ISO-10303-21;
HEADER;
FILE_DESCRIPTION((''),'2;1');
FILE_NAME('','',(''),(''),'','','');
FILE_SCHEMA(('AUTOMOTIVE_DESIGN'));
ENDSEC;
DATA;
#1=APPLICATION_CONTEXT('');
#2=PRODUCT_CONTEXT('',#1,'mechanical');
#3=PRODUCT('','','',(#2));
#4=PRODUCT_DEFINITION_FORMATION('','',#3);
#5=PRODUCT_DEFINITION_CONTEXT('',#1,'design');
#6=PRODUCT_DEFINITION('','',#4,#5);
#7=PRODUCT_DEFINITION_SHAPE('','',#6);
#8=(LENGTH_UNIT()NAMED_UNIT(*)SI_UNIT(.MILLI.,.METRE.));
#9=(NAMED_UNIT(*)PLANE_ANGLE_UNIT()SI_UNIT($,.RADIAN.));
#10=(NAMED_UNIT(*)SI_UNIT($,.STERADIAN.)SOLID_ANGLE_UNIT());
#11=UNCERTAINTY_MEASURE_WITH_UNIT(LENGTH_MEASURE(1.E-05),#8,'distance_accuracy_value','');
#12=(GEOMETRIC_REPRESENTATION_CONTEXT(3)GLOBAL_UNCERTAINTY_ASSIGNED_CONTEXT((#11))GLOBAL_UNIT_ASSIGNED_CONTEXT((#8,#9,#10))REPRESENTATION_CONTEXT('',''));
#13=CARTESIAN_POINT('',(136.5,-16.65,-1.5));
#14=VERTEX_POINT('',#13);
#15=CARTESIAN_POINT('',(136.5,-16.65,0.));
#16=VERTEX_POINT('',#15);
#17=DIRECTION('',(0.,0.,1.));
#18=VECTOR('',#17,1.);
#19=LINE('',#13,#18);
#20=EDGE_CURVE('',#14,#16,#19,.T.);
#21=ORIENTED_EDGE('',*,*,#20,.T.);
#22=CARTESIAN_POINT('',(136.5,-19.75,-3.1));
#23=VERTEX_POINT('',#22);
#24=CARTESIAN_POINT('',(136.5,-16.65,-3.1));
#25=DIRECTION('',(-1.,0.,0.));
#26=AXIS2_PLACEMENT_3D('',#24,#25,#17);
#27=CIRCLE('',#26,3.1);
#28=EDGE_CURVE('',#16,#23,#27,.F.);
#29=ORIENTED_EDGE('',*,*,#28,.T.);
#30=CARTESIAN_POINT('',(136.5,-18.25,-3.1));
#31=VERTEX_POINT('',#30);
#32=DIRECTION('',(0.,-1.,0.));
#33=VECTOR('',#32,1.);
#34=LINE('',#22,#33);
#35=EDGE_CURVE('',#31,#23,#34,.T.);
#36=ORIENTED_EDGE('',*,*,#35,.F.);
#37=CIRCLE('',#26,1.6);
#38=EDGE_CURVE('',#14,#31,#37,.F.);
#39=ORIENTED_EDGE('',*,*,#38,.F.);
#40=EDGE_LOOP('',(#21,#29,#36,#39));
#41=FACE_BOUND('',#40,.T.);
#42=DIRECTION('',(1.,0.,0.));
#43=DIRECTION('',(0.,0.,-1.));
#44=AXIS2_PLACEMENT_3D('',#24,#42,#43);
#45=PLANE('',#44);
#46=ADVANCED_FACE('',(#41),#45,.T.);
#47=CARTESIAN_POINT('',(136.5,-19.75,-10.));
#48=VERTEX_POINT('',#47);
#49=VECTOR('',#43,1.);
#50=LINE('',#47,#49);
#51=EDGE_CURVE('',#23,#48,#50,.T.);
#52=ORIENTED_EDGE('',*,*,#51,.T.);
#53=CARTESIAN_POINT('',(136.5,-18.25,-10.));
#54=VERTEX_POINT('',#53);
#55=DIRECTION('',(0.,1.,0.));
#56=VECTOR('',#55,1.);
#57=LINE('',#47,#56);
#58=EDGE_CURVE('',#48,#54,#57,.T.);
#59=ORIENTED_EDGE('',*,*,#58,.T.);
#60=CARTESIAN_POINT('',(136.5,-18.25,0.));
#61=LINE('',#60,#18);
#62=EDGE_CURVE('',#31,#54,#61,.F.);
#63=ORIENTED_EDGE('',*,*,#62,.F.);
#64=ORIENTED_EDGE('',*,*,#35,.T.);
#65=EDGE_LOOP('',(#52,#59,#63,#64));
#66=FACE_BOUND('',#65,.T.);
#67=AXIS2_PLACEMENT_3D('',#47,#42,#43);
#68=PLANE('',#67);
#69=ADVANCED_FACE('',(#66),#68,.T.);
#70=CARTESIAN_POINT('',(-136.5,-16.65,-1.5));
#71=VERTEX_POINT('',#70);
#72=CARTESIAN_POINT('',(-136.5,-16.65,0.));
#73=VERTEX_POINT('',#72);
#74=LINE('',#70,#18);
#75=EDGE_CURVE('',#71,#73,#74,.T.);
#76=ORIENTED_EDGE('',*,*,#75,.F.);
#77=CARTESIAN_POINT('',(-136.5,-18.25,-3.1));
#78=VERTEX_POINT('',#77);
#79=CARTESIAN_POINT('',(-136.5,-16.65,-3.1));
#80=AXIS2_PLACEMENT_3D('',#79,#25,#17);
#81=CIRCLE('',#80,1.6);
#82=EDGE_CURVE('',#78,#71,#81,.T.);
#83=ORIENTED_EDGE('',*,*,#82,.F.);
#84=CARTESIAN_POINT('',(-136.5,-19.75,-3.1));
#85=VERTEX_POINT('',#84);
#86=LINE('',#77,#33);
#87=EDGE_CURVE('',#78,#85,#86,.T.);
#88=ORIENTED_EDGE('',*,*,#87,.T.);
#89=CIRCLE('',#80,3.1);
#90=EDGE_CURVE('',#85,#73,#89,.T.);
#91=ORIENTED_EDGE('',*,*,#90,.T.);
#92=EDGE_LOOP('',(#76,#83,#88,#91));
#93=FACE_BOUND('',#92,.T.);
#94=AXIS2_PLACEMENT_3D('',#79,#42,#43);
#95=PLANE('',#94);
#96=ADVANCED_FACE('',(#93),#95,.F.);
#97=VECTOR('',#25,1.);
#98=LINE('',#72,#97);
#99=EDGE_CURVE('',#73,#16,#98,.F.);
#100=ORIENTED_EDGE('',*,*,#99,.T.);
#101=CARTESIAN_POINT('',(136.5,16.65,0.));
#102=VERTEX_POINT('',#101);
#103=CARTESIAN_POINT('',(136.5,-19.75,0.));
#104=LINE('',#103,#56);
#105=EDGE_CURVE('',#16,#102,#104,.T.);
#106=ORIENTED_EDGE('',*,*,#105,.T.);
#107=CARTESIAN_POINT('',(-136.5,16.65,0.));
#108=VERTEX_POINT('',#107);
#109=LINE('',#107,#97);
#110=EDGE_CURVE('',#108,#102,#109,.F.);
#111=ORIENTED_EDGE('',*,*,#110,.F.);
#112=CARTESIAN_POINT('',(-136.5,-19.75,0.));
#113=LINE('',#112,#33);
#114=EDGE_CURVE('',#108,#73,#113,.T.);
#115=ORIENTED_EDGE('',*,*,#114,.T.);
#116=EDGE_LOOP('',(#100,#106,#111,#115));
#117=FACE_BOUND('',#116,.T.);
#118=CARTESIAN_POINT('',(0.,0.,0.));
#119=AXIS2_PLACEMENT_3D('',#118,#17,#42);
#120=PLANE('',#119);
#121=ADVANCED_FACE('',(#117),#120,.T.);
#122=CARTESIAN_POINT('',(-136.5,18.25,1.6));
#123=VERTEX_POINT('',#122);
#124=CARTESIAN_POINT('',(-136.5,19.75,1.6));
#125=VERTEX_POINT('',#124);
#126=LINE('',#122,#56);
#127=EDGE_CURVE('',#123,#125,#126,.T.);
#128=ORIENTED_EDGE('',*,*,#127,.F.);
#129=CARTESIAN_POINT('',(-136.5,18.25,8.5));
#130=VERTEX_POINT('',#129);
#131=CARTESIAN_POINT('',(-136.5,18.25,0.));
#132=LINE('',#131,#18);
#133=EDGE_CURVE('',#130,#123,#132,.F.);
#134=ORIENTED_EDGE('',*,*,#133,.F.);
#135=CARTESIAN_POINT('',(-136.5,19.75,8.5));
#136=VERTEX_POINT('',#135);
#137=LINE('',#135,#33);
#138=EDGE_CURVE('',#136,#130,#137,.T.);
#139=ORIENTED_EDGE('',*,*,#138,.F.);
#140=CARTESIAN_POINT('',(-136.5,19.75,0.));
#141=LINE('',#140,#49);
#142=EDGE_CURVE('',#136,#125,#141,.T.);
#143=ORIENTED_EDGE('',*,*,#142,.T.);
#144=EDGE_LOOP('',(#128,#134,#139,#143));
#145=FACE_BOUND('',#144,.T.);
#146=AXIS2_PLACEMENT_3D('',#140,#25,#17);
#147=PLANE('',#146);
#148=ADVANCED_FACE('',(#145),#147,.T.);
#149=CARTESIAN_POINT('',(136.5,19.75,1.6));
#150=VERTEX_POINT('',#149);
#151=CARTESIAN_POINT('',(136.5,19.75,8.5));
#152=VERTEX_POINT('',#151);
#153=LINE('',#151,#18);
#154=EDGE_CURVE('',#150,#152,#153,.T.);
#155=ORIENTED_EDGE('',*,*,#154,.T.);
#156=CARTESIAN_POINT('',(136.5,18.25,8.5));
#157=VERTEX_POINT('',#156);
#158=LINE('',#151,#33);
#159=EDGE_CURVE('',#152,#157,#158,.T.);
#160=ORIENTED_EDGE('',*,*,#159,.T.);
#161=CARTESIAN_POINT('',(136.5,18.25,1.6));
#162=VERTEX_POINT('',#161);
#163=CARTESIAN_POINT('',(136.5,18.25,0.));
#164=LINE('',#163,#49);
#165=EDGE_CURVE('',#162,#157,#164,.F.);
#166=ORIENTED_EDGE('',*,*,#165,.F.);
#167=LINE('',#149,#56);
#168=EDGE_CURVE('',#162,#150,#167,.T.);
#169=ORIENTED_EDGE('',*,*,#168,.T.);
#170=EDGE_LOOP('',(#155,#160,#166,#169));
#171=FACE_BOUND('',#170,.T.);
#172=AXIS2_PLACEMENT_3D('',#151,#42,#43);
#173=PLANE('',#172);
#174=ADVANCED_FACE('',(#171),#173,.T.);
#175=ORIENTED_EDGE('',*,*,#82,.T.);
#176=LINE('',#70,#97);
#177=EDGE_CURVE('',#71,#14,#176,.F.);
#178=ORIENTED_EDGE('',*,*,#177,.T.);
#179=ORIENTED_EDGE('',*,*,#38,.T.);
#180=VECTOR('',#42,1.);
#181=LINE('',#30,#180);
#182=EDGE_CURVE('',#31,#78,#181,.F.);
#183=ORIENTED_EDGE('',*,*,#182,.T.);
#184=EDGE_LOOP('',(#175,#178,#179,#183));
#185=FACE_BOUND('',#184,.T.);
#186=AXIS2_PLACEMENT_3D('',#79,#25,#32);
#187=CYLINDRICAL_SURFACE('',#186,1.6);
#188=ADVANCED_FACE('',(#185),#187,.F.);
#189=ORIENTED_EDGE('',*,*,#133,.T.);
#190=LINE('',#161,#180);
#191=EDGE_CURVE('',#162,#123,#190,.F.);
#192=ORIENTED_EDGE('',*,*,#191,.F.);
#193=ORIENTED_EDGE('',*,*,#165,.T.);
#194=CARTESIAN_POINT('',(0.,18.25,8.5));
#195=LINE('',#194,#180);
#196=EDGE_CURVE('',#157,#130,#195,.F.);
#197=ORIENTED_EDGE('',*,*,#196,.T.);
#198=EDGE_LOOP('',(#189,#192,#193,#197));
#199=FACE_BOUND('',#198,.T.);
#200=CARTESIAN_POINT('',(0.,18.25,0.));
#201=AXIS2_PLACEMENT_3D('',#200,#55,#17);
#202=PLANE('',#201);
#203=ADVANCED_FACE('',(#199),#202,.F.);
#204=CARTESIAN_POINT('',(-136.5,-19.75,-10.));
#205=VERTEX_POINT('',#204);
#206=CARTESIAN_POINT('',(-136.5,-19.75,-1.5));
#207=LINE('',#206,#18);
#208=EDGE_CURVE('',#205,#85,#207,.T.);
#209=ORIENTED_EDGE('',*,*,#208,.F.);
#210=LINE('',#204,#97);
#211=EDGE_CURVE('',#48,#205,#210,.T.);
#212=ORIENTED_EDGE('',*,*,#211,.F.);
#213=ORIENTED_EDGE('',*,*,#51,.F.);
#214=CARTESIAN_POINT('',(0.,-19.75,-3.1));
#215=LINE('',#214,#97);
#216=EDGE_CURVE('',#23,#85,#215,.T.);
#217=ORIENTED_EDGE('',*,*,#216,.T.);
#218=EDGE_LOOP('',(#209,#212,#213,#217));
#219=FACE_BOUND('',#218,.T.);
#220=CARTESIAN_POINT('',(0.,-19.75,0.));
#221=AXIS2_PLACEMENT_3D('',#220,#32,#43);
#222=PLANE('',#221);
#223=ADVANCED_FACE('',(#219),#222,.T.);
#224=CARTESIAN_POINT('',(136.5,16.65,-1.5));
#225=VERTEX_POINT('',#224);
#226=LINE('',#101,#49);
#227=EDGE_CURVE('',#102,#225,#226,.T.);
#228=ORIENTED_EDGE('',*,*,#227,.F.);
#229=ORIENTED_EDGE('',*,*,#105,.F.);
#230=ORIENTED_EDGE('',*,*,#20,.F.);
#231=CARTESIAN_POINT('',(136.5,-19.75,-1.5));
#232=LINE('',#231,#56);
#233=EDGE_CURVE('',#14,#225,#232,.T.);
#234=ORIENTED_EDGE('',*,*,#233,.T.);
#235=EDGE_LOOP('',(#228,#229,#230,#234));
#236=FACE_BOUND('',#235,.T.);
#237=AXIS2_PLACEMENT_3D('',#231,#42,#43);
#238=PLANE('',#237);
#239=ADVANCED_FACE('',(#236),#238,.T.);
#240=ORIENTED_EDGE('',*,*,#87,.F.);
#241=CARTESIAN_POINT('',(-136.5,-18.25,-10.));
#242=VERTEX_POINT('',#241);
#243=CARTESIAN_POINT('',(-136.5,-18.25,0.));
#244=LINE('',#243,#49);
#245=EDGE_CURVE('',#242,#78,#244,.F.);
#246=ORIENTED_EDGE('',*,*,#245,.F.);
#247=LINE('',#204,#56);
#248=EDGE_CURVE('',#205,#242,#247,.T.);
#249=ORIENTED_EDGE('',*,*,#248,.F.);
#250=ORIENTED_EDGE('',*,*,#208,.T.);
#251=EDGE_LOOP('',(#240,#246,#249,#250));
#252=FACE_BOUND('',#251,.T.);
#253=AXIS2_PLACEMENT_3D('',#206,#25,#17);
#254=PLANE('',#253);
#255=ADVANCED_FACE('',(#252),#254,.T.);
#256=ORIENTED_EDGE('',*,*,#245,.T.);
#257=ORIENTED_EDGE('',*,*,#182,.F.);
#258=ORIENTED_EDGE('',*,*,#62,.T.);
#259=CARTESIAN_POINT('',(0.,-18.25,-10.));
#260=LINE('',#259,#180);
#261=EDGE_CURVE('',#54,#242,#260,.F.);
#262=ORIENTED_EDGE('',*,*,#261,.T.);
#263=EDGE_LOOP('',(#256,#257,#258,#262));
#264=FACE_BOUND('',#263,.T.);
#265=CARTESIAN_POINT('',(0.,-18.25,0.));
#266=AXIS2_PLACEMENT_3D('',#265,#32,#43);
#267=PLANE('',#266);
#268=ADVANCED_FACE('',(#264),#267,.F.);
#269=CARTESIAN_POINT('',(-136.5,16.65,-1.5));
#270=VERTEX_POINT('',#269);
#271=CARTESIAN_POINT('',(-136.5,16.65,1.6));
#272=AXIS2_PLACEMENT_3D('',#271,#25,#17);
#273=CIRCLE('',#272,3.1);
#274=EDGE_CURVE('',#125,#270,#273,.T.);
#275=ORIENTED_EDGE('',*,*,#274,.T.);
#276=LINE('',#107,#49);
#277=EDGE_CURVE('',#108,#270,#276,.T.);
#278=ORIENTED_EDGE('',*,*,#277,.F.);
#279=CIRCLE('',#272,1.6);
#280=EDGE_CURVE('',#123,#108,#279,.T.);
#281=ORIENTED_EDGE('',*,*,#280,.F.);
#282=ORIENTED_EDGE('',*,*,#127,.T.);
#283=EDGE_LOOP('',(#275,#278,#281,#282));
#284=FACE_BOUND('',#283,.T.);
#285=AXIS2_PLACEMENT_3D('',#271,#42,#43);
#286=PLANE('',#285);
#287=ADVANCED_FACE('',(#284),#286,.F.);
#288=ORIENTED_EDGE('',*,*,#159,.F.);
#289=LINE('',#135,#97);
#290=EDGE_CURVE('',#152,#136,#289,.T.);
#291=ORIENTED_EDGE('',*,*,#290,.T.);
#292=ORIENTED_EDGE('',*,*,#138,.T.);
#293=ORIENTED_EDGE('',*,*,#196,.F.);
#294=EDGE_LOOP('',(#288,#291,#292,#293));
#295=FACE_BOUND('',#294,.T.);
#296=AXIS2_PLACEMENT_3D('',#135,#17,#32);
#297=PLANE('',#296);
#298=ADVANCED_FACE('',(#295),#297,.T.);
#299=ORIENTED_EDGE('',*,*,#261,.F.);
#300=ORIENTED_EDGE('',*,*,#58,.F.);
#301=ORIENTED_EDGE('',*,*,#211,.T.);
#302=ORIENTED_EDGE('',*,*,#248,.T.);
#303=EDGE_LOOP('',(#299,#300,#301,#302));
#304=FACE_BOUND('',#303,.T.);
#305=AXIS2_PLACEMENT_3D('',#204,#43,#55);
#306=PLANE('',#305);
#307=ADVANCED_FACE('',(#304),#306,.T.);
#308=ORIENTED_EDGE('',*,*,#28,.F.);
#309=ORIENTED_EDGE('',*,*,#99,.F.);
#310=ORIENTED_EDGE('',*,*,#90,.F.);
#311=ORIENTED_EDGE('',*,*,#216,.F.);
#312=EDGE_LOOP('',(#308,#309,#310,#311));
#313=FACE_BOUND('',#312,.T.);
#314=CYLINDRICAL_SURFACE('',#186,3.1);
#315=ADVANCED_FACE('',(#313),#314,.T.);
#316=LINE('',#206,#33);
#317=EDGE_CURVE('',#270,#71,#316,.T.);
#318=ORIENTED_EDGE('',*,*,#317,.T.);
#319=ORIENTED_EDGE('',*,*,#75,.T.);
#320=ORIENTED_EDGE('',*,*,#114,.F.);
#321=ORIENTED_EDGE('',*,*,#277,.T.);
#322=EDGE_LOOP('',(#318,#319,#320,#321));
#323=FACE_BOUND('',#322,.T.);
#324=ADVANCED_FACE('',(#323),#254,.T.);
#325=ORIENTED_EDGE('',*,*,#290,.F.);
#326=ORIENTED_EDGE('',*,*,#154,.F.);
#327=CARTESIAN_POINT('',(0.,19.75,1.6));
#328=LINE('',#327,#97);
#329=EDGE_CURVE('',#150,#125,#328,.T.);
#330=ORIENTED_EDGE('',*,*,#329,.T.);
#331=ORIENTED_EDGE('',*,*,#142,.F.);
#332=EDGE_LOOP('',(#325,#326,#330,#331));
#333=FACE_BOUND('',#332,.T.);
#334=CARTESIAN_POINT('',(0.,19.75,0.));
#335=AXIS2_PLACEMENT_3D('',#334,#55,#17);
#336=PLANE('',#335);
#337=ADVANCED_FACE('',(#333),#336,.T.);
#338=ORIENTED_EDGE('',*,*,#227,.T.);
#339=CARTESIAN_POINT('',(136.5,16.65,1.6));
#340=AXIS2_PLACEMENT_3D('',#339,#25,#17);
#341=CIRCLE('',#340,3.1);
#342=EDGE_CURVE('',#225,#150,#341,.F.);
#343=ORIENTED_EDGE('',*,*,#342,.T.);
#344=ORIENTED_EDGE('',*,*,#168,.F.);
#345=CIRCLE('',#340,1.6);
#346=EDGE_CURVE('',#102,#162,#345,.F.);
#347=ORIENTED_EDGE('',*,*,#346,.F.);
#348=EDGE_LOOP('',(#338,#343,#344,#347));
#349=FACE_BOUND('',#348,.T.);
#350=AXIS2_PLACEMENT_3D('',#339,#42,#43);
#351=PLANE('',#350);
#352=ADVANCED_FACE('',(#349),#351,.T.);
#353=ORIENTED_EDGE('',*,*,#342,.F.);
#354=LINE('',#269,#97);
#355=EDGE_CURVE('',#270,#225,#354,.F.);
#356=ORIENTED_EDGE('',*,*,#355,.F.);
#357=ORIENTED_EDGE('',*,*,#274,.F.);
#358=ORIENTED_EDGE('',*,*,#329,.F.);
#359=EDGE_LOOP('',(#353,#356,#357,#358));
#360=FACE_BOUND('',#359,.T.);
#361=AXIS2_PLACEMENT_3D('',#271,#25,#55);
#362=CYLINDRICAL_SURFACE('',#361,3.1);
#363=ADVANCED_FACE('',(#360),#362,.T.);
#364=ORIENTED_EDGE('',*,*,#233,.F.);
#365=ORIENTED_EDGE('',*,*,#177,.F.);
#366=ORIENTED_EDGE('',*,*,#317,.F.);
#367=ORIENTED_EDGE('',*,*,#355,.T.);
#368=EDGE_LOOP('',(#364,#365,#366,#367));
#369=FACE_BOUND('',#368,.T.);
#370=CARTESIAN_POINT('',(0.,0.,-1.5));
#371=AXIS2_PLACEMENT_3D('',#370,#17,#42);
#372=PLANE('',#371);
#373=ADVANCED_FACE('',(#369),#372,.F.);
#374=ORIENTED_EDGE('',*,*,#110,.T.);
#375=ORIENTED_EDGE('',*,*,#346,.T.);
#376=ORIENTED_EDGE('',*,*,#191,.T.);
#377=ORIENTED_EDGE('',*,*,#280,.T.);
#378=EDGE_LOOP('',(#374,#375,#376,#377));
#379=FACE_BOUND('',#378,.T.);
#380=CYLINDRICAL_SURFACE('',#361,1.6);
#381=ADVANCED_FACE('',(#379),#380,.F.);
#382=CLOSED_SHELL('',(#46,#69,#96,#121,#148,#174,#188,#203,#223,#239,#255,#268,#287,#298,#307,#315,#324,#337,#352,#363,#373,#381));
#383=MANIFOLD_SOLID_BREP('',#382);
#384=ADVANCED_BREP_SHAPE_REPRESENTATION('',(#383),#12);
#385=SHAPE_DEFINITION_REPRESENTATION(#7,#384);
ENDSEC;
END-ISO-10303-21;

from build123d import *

# Parameters (mm, degrees)
SKETCH1_W                    = 273
SKETCH1_H                    = 39.5
BASE_FLANGE1_DEPTH           = 1.5
EDGE_FLANGE1_STRIP_W         = 9.2
EDGE_FLANGE1_STRIP_H         = 1.5
EDGE_FLANGE1_STRIP_CUT_DEPTH = 273
EDGE_FLANGE1_DEPTH           = 273
EDGE_FLANGE2_STRIP_W         = 9.2
EDGE_FLANGE2_STRIP_H         = 1.5
EDGE_FLANGE2_STRIP_CUT_DEPTH = 273
EDGE_FLANGE2_DEPTH           = 273


# Sheet-metal steps are written as plain solids
with BuildPart() as part:
    # Sketch1 → Base-Flange1 (new body)
    with BuildSketch(Plane.XY):
        Rectangle(SKETCH1_W, SKETCH1_H)
    extrude(amount=-BASE_FLANGE1_DEPTH)

    # Edge-Flange1 strip (across the edge) → Edge-Flange1 strip cut (cut)
    with BuildSketch(Plane(origin=(136.5, 19.75, 0), x_dir=(0, -1, 0), z_dir=(-1, 0, 0))):
        with Locations((-1.5, -0.75)):
            Rectangle(EDGE_FLANGE1_STRIP_W, EDGE_FLANGE1_STRIP_H)
    extrude(amount=EDGE_FLANGE1_STRIP_CUT_DEPTH, mode=Mode.SUBTRACT)

    # Edge-Flange1 section (across the edge) → Edge-Flange1 (add)
    with BuildSketch(Plane(origin=(136.5, 19.75, 0), x_dir=(0, -1, 0), z_dir=(-1, 0, 0))):
        with BuildLine():
            Line((0, 1.6), (0, 8.5))
            Line((0, 8.5), (1.5, 8.5))
            Line((1.5, 8.5), (1.5, 1.6))
            ThreePointArc((1.5, 1.6), (1.96862915, 0.46862915), (3.1, 0))
            Line((3.1, 0), (3.1, -1.5))
            ThreePointArc((3.1, -1.5), (0.907968978, -0.592031022), (0, 1.6))
        make_face()
    extrude(amount=EDGE_FLANGE1_DEPTH)

    # Edge-Flange2 strip (across the edge) → Edge-Flange2 strip cut (cut)
    with BuildSketch(Plane(origin=(136.5, -19.75, -1.5), x_dir=(0, 1, 0), z_dir=(-1, 0, 0))):
        with Locations((-1.5, -0.75)):
            Rectangle(EDGE_FLANGE2_STRIP_W, EDGE_FLANGE2_STRIP_H)
    extrude(amount=EDGE_FLANGE2_STRIP_CUT_DEPTH, mode=Mode.SUBTRACT)

    # Edge-Flange2 section (across the edge) → Edge-Flange2 (add)
    with BuildSketch(Plane(origin=(136.5, -19.75, -1.5), x_dir=(0, 1, 0), z_dir=(-1, 0, 0))):
        with BuildLine():
            Line((0, 1.6), (0, 8.5))
            Line((0, 8.5), (1.5, 8.5))
            Line((1.5, 8.5), (1.5, 1.6))
            ThreePointArc((1.5, 1.6), (1.96862915, 0.46862915), (3.1, 0))
            Line((3.1, 0), (3.1, -1.5))
            ThreePointArc((3.1, -1.5), (0.907968978, -0.592031022), (0, 1.6))
        make_face()
    extrude(amount=EDGE_FLANGE2_DEPTH)


solid = part.part
